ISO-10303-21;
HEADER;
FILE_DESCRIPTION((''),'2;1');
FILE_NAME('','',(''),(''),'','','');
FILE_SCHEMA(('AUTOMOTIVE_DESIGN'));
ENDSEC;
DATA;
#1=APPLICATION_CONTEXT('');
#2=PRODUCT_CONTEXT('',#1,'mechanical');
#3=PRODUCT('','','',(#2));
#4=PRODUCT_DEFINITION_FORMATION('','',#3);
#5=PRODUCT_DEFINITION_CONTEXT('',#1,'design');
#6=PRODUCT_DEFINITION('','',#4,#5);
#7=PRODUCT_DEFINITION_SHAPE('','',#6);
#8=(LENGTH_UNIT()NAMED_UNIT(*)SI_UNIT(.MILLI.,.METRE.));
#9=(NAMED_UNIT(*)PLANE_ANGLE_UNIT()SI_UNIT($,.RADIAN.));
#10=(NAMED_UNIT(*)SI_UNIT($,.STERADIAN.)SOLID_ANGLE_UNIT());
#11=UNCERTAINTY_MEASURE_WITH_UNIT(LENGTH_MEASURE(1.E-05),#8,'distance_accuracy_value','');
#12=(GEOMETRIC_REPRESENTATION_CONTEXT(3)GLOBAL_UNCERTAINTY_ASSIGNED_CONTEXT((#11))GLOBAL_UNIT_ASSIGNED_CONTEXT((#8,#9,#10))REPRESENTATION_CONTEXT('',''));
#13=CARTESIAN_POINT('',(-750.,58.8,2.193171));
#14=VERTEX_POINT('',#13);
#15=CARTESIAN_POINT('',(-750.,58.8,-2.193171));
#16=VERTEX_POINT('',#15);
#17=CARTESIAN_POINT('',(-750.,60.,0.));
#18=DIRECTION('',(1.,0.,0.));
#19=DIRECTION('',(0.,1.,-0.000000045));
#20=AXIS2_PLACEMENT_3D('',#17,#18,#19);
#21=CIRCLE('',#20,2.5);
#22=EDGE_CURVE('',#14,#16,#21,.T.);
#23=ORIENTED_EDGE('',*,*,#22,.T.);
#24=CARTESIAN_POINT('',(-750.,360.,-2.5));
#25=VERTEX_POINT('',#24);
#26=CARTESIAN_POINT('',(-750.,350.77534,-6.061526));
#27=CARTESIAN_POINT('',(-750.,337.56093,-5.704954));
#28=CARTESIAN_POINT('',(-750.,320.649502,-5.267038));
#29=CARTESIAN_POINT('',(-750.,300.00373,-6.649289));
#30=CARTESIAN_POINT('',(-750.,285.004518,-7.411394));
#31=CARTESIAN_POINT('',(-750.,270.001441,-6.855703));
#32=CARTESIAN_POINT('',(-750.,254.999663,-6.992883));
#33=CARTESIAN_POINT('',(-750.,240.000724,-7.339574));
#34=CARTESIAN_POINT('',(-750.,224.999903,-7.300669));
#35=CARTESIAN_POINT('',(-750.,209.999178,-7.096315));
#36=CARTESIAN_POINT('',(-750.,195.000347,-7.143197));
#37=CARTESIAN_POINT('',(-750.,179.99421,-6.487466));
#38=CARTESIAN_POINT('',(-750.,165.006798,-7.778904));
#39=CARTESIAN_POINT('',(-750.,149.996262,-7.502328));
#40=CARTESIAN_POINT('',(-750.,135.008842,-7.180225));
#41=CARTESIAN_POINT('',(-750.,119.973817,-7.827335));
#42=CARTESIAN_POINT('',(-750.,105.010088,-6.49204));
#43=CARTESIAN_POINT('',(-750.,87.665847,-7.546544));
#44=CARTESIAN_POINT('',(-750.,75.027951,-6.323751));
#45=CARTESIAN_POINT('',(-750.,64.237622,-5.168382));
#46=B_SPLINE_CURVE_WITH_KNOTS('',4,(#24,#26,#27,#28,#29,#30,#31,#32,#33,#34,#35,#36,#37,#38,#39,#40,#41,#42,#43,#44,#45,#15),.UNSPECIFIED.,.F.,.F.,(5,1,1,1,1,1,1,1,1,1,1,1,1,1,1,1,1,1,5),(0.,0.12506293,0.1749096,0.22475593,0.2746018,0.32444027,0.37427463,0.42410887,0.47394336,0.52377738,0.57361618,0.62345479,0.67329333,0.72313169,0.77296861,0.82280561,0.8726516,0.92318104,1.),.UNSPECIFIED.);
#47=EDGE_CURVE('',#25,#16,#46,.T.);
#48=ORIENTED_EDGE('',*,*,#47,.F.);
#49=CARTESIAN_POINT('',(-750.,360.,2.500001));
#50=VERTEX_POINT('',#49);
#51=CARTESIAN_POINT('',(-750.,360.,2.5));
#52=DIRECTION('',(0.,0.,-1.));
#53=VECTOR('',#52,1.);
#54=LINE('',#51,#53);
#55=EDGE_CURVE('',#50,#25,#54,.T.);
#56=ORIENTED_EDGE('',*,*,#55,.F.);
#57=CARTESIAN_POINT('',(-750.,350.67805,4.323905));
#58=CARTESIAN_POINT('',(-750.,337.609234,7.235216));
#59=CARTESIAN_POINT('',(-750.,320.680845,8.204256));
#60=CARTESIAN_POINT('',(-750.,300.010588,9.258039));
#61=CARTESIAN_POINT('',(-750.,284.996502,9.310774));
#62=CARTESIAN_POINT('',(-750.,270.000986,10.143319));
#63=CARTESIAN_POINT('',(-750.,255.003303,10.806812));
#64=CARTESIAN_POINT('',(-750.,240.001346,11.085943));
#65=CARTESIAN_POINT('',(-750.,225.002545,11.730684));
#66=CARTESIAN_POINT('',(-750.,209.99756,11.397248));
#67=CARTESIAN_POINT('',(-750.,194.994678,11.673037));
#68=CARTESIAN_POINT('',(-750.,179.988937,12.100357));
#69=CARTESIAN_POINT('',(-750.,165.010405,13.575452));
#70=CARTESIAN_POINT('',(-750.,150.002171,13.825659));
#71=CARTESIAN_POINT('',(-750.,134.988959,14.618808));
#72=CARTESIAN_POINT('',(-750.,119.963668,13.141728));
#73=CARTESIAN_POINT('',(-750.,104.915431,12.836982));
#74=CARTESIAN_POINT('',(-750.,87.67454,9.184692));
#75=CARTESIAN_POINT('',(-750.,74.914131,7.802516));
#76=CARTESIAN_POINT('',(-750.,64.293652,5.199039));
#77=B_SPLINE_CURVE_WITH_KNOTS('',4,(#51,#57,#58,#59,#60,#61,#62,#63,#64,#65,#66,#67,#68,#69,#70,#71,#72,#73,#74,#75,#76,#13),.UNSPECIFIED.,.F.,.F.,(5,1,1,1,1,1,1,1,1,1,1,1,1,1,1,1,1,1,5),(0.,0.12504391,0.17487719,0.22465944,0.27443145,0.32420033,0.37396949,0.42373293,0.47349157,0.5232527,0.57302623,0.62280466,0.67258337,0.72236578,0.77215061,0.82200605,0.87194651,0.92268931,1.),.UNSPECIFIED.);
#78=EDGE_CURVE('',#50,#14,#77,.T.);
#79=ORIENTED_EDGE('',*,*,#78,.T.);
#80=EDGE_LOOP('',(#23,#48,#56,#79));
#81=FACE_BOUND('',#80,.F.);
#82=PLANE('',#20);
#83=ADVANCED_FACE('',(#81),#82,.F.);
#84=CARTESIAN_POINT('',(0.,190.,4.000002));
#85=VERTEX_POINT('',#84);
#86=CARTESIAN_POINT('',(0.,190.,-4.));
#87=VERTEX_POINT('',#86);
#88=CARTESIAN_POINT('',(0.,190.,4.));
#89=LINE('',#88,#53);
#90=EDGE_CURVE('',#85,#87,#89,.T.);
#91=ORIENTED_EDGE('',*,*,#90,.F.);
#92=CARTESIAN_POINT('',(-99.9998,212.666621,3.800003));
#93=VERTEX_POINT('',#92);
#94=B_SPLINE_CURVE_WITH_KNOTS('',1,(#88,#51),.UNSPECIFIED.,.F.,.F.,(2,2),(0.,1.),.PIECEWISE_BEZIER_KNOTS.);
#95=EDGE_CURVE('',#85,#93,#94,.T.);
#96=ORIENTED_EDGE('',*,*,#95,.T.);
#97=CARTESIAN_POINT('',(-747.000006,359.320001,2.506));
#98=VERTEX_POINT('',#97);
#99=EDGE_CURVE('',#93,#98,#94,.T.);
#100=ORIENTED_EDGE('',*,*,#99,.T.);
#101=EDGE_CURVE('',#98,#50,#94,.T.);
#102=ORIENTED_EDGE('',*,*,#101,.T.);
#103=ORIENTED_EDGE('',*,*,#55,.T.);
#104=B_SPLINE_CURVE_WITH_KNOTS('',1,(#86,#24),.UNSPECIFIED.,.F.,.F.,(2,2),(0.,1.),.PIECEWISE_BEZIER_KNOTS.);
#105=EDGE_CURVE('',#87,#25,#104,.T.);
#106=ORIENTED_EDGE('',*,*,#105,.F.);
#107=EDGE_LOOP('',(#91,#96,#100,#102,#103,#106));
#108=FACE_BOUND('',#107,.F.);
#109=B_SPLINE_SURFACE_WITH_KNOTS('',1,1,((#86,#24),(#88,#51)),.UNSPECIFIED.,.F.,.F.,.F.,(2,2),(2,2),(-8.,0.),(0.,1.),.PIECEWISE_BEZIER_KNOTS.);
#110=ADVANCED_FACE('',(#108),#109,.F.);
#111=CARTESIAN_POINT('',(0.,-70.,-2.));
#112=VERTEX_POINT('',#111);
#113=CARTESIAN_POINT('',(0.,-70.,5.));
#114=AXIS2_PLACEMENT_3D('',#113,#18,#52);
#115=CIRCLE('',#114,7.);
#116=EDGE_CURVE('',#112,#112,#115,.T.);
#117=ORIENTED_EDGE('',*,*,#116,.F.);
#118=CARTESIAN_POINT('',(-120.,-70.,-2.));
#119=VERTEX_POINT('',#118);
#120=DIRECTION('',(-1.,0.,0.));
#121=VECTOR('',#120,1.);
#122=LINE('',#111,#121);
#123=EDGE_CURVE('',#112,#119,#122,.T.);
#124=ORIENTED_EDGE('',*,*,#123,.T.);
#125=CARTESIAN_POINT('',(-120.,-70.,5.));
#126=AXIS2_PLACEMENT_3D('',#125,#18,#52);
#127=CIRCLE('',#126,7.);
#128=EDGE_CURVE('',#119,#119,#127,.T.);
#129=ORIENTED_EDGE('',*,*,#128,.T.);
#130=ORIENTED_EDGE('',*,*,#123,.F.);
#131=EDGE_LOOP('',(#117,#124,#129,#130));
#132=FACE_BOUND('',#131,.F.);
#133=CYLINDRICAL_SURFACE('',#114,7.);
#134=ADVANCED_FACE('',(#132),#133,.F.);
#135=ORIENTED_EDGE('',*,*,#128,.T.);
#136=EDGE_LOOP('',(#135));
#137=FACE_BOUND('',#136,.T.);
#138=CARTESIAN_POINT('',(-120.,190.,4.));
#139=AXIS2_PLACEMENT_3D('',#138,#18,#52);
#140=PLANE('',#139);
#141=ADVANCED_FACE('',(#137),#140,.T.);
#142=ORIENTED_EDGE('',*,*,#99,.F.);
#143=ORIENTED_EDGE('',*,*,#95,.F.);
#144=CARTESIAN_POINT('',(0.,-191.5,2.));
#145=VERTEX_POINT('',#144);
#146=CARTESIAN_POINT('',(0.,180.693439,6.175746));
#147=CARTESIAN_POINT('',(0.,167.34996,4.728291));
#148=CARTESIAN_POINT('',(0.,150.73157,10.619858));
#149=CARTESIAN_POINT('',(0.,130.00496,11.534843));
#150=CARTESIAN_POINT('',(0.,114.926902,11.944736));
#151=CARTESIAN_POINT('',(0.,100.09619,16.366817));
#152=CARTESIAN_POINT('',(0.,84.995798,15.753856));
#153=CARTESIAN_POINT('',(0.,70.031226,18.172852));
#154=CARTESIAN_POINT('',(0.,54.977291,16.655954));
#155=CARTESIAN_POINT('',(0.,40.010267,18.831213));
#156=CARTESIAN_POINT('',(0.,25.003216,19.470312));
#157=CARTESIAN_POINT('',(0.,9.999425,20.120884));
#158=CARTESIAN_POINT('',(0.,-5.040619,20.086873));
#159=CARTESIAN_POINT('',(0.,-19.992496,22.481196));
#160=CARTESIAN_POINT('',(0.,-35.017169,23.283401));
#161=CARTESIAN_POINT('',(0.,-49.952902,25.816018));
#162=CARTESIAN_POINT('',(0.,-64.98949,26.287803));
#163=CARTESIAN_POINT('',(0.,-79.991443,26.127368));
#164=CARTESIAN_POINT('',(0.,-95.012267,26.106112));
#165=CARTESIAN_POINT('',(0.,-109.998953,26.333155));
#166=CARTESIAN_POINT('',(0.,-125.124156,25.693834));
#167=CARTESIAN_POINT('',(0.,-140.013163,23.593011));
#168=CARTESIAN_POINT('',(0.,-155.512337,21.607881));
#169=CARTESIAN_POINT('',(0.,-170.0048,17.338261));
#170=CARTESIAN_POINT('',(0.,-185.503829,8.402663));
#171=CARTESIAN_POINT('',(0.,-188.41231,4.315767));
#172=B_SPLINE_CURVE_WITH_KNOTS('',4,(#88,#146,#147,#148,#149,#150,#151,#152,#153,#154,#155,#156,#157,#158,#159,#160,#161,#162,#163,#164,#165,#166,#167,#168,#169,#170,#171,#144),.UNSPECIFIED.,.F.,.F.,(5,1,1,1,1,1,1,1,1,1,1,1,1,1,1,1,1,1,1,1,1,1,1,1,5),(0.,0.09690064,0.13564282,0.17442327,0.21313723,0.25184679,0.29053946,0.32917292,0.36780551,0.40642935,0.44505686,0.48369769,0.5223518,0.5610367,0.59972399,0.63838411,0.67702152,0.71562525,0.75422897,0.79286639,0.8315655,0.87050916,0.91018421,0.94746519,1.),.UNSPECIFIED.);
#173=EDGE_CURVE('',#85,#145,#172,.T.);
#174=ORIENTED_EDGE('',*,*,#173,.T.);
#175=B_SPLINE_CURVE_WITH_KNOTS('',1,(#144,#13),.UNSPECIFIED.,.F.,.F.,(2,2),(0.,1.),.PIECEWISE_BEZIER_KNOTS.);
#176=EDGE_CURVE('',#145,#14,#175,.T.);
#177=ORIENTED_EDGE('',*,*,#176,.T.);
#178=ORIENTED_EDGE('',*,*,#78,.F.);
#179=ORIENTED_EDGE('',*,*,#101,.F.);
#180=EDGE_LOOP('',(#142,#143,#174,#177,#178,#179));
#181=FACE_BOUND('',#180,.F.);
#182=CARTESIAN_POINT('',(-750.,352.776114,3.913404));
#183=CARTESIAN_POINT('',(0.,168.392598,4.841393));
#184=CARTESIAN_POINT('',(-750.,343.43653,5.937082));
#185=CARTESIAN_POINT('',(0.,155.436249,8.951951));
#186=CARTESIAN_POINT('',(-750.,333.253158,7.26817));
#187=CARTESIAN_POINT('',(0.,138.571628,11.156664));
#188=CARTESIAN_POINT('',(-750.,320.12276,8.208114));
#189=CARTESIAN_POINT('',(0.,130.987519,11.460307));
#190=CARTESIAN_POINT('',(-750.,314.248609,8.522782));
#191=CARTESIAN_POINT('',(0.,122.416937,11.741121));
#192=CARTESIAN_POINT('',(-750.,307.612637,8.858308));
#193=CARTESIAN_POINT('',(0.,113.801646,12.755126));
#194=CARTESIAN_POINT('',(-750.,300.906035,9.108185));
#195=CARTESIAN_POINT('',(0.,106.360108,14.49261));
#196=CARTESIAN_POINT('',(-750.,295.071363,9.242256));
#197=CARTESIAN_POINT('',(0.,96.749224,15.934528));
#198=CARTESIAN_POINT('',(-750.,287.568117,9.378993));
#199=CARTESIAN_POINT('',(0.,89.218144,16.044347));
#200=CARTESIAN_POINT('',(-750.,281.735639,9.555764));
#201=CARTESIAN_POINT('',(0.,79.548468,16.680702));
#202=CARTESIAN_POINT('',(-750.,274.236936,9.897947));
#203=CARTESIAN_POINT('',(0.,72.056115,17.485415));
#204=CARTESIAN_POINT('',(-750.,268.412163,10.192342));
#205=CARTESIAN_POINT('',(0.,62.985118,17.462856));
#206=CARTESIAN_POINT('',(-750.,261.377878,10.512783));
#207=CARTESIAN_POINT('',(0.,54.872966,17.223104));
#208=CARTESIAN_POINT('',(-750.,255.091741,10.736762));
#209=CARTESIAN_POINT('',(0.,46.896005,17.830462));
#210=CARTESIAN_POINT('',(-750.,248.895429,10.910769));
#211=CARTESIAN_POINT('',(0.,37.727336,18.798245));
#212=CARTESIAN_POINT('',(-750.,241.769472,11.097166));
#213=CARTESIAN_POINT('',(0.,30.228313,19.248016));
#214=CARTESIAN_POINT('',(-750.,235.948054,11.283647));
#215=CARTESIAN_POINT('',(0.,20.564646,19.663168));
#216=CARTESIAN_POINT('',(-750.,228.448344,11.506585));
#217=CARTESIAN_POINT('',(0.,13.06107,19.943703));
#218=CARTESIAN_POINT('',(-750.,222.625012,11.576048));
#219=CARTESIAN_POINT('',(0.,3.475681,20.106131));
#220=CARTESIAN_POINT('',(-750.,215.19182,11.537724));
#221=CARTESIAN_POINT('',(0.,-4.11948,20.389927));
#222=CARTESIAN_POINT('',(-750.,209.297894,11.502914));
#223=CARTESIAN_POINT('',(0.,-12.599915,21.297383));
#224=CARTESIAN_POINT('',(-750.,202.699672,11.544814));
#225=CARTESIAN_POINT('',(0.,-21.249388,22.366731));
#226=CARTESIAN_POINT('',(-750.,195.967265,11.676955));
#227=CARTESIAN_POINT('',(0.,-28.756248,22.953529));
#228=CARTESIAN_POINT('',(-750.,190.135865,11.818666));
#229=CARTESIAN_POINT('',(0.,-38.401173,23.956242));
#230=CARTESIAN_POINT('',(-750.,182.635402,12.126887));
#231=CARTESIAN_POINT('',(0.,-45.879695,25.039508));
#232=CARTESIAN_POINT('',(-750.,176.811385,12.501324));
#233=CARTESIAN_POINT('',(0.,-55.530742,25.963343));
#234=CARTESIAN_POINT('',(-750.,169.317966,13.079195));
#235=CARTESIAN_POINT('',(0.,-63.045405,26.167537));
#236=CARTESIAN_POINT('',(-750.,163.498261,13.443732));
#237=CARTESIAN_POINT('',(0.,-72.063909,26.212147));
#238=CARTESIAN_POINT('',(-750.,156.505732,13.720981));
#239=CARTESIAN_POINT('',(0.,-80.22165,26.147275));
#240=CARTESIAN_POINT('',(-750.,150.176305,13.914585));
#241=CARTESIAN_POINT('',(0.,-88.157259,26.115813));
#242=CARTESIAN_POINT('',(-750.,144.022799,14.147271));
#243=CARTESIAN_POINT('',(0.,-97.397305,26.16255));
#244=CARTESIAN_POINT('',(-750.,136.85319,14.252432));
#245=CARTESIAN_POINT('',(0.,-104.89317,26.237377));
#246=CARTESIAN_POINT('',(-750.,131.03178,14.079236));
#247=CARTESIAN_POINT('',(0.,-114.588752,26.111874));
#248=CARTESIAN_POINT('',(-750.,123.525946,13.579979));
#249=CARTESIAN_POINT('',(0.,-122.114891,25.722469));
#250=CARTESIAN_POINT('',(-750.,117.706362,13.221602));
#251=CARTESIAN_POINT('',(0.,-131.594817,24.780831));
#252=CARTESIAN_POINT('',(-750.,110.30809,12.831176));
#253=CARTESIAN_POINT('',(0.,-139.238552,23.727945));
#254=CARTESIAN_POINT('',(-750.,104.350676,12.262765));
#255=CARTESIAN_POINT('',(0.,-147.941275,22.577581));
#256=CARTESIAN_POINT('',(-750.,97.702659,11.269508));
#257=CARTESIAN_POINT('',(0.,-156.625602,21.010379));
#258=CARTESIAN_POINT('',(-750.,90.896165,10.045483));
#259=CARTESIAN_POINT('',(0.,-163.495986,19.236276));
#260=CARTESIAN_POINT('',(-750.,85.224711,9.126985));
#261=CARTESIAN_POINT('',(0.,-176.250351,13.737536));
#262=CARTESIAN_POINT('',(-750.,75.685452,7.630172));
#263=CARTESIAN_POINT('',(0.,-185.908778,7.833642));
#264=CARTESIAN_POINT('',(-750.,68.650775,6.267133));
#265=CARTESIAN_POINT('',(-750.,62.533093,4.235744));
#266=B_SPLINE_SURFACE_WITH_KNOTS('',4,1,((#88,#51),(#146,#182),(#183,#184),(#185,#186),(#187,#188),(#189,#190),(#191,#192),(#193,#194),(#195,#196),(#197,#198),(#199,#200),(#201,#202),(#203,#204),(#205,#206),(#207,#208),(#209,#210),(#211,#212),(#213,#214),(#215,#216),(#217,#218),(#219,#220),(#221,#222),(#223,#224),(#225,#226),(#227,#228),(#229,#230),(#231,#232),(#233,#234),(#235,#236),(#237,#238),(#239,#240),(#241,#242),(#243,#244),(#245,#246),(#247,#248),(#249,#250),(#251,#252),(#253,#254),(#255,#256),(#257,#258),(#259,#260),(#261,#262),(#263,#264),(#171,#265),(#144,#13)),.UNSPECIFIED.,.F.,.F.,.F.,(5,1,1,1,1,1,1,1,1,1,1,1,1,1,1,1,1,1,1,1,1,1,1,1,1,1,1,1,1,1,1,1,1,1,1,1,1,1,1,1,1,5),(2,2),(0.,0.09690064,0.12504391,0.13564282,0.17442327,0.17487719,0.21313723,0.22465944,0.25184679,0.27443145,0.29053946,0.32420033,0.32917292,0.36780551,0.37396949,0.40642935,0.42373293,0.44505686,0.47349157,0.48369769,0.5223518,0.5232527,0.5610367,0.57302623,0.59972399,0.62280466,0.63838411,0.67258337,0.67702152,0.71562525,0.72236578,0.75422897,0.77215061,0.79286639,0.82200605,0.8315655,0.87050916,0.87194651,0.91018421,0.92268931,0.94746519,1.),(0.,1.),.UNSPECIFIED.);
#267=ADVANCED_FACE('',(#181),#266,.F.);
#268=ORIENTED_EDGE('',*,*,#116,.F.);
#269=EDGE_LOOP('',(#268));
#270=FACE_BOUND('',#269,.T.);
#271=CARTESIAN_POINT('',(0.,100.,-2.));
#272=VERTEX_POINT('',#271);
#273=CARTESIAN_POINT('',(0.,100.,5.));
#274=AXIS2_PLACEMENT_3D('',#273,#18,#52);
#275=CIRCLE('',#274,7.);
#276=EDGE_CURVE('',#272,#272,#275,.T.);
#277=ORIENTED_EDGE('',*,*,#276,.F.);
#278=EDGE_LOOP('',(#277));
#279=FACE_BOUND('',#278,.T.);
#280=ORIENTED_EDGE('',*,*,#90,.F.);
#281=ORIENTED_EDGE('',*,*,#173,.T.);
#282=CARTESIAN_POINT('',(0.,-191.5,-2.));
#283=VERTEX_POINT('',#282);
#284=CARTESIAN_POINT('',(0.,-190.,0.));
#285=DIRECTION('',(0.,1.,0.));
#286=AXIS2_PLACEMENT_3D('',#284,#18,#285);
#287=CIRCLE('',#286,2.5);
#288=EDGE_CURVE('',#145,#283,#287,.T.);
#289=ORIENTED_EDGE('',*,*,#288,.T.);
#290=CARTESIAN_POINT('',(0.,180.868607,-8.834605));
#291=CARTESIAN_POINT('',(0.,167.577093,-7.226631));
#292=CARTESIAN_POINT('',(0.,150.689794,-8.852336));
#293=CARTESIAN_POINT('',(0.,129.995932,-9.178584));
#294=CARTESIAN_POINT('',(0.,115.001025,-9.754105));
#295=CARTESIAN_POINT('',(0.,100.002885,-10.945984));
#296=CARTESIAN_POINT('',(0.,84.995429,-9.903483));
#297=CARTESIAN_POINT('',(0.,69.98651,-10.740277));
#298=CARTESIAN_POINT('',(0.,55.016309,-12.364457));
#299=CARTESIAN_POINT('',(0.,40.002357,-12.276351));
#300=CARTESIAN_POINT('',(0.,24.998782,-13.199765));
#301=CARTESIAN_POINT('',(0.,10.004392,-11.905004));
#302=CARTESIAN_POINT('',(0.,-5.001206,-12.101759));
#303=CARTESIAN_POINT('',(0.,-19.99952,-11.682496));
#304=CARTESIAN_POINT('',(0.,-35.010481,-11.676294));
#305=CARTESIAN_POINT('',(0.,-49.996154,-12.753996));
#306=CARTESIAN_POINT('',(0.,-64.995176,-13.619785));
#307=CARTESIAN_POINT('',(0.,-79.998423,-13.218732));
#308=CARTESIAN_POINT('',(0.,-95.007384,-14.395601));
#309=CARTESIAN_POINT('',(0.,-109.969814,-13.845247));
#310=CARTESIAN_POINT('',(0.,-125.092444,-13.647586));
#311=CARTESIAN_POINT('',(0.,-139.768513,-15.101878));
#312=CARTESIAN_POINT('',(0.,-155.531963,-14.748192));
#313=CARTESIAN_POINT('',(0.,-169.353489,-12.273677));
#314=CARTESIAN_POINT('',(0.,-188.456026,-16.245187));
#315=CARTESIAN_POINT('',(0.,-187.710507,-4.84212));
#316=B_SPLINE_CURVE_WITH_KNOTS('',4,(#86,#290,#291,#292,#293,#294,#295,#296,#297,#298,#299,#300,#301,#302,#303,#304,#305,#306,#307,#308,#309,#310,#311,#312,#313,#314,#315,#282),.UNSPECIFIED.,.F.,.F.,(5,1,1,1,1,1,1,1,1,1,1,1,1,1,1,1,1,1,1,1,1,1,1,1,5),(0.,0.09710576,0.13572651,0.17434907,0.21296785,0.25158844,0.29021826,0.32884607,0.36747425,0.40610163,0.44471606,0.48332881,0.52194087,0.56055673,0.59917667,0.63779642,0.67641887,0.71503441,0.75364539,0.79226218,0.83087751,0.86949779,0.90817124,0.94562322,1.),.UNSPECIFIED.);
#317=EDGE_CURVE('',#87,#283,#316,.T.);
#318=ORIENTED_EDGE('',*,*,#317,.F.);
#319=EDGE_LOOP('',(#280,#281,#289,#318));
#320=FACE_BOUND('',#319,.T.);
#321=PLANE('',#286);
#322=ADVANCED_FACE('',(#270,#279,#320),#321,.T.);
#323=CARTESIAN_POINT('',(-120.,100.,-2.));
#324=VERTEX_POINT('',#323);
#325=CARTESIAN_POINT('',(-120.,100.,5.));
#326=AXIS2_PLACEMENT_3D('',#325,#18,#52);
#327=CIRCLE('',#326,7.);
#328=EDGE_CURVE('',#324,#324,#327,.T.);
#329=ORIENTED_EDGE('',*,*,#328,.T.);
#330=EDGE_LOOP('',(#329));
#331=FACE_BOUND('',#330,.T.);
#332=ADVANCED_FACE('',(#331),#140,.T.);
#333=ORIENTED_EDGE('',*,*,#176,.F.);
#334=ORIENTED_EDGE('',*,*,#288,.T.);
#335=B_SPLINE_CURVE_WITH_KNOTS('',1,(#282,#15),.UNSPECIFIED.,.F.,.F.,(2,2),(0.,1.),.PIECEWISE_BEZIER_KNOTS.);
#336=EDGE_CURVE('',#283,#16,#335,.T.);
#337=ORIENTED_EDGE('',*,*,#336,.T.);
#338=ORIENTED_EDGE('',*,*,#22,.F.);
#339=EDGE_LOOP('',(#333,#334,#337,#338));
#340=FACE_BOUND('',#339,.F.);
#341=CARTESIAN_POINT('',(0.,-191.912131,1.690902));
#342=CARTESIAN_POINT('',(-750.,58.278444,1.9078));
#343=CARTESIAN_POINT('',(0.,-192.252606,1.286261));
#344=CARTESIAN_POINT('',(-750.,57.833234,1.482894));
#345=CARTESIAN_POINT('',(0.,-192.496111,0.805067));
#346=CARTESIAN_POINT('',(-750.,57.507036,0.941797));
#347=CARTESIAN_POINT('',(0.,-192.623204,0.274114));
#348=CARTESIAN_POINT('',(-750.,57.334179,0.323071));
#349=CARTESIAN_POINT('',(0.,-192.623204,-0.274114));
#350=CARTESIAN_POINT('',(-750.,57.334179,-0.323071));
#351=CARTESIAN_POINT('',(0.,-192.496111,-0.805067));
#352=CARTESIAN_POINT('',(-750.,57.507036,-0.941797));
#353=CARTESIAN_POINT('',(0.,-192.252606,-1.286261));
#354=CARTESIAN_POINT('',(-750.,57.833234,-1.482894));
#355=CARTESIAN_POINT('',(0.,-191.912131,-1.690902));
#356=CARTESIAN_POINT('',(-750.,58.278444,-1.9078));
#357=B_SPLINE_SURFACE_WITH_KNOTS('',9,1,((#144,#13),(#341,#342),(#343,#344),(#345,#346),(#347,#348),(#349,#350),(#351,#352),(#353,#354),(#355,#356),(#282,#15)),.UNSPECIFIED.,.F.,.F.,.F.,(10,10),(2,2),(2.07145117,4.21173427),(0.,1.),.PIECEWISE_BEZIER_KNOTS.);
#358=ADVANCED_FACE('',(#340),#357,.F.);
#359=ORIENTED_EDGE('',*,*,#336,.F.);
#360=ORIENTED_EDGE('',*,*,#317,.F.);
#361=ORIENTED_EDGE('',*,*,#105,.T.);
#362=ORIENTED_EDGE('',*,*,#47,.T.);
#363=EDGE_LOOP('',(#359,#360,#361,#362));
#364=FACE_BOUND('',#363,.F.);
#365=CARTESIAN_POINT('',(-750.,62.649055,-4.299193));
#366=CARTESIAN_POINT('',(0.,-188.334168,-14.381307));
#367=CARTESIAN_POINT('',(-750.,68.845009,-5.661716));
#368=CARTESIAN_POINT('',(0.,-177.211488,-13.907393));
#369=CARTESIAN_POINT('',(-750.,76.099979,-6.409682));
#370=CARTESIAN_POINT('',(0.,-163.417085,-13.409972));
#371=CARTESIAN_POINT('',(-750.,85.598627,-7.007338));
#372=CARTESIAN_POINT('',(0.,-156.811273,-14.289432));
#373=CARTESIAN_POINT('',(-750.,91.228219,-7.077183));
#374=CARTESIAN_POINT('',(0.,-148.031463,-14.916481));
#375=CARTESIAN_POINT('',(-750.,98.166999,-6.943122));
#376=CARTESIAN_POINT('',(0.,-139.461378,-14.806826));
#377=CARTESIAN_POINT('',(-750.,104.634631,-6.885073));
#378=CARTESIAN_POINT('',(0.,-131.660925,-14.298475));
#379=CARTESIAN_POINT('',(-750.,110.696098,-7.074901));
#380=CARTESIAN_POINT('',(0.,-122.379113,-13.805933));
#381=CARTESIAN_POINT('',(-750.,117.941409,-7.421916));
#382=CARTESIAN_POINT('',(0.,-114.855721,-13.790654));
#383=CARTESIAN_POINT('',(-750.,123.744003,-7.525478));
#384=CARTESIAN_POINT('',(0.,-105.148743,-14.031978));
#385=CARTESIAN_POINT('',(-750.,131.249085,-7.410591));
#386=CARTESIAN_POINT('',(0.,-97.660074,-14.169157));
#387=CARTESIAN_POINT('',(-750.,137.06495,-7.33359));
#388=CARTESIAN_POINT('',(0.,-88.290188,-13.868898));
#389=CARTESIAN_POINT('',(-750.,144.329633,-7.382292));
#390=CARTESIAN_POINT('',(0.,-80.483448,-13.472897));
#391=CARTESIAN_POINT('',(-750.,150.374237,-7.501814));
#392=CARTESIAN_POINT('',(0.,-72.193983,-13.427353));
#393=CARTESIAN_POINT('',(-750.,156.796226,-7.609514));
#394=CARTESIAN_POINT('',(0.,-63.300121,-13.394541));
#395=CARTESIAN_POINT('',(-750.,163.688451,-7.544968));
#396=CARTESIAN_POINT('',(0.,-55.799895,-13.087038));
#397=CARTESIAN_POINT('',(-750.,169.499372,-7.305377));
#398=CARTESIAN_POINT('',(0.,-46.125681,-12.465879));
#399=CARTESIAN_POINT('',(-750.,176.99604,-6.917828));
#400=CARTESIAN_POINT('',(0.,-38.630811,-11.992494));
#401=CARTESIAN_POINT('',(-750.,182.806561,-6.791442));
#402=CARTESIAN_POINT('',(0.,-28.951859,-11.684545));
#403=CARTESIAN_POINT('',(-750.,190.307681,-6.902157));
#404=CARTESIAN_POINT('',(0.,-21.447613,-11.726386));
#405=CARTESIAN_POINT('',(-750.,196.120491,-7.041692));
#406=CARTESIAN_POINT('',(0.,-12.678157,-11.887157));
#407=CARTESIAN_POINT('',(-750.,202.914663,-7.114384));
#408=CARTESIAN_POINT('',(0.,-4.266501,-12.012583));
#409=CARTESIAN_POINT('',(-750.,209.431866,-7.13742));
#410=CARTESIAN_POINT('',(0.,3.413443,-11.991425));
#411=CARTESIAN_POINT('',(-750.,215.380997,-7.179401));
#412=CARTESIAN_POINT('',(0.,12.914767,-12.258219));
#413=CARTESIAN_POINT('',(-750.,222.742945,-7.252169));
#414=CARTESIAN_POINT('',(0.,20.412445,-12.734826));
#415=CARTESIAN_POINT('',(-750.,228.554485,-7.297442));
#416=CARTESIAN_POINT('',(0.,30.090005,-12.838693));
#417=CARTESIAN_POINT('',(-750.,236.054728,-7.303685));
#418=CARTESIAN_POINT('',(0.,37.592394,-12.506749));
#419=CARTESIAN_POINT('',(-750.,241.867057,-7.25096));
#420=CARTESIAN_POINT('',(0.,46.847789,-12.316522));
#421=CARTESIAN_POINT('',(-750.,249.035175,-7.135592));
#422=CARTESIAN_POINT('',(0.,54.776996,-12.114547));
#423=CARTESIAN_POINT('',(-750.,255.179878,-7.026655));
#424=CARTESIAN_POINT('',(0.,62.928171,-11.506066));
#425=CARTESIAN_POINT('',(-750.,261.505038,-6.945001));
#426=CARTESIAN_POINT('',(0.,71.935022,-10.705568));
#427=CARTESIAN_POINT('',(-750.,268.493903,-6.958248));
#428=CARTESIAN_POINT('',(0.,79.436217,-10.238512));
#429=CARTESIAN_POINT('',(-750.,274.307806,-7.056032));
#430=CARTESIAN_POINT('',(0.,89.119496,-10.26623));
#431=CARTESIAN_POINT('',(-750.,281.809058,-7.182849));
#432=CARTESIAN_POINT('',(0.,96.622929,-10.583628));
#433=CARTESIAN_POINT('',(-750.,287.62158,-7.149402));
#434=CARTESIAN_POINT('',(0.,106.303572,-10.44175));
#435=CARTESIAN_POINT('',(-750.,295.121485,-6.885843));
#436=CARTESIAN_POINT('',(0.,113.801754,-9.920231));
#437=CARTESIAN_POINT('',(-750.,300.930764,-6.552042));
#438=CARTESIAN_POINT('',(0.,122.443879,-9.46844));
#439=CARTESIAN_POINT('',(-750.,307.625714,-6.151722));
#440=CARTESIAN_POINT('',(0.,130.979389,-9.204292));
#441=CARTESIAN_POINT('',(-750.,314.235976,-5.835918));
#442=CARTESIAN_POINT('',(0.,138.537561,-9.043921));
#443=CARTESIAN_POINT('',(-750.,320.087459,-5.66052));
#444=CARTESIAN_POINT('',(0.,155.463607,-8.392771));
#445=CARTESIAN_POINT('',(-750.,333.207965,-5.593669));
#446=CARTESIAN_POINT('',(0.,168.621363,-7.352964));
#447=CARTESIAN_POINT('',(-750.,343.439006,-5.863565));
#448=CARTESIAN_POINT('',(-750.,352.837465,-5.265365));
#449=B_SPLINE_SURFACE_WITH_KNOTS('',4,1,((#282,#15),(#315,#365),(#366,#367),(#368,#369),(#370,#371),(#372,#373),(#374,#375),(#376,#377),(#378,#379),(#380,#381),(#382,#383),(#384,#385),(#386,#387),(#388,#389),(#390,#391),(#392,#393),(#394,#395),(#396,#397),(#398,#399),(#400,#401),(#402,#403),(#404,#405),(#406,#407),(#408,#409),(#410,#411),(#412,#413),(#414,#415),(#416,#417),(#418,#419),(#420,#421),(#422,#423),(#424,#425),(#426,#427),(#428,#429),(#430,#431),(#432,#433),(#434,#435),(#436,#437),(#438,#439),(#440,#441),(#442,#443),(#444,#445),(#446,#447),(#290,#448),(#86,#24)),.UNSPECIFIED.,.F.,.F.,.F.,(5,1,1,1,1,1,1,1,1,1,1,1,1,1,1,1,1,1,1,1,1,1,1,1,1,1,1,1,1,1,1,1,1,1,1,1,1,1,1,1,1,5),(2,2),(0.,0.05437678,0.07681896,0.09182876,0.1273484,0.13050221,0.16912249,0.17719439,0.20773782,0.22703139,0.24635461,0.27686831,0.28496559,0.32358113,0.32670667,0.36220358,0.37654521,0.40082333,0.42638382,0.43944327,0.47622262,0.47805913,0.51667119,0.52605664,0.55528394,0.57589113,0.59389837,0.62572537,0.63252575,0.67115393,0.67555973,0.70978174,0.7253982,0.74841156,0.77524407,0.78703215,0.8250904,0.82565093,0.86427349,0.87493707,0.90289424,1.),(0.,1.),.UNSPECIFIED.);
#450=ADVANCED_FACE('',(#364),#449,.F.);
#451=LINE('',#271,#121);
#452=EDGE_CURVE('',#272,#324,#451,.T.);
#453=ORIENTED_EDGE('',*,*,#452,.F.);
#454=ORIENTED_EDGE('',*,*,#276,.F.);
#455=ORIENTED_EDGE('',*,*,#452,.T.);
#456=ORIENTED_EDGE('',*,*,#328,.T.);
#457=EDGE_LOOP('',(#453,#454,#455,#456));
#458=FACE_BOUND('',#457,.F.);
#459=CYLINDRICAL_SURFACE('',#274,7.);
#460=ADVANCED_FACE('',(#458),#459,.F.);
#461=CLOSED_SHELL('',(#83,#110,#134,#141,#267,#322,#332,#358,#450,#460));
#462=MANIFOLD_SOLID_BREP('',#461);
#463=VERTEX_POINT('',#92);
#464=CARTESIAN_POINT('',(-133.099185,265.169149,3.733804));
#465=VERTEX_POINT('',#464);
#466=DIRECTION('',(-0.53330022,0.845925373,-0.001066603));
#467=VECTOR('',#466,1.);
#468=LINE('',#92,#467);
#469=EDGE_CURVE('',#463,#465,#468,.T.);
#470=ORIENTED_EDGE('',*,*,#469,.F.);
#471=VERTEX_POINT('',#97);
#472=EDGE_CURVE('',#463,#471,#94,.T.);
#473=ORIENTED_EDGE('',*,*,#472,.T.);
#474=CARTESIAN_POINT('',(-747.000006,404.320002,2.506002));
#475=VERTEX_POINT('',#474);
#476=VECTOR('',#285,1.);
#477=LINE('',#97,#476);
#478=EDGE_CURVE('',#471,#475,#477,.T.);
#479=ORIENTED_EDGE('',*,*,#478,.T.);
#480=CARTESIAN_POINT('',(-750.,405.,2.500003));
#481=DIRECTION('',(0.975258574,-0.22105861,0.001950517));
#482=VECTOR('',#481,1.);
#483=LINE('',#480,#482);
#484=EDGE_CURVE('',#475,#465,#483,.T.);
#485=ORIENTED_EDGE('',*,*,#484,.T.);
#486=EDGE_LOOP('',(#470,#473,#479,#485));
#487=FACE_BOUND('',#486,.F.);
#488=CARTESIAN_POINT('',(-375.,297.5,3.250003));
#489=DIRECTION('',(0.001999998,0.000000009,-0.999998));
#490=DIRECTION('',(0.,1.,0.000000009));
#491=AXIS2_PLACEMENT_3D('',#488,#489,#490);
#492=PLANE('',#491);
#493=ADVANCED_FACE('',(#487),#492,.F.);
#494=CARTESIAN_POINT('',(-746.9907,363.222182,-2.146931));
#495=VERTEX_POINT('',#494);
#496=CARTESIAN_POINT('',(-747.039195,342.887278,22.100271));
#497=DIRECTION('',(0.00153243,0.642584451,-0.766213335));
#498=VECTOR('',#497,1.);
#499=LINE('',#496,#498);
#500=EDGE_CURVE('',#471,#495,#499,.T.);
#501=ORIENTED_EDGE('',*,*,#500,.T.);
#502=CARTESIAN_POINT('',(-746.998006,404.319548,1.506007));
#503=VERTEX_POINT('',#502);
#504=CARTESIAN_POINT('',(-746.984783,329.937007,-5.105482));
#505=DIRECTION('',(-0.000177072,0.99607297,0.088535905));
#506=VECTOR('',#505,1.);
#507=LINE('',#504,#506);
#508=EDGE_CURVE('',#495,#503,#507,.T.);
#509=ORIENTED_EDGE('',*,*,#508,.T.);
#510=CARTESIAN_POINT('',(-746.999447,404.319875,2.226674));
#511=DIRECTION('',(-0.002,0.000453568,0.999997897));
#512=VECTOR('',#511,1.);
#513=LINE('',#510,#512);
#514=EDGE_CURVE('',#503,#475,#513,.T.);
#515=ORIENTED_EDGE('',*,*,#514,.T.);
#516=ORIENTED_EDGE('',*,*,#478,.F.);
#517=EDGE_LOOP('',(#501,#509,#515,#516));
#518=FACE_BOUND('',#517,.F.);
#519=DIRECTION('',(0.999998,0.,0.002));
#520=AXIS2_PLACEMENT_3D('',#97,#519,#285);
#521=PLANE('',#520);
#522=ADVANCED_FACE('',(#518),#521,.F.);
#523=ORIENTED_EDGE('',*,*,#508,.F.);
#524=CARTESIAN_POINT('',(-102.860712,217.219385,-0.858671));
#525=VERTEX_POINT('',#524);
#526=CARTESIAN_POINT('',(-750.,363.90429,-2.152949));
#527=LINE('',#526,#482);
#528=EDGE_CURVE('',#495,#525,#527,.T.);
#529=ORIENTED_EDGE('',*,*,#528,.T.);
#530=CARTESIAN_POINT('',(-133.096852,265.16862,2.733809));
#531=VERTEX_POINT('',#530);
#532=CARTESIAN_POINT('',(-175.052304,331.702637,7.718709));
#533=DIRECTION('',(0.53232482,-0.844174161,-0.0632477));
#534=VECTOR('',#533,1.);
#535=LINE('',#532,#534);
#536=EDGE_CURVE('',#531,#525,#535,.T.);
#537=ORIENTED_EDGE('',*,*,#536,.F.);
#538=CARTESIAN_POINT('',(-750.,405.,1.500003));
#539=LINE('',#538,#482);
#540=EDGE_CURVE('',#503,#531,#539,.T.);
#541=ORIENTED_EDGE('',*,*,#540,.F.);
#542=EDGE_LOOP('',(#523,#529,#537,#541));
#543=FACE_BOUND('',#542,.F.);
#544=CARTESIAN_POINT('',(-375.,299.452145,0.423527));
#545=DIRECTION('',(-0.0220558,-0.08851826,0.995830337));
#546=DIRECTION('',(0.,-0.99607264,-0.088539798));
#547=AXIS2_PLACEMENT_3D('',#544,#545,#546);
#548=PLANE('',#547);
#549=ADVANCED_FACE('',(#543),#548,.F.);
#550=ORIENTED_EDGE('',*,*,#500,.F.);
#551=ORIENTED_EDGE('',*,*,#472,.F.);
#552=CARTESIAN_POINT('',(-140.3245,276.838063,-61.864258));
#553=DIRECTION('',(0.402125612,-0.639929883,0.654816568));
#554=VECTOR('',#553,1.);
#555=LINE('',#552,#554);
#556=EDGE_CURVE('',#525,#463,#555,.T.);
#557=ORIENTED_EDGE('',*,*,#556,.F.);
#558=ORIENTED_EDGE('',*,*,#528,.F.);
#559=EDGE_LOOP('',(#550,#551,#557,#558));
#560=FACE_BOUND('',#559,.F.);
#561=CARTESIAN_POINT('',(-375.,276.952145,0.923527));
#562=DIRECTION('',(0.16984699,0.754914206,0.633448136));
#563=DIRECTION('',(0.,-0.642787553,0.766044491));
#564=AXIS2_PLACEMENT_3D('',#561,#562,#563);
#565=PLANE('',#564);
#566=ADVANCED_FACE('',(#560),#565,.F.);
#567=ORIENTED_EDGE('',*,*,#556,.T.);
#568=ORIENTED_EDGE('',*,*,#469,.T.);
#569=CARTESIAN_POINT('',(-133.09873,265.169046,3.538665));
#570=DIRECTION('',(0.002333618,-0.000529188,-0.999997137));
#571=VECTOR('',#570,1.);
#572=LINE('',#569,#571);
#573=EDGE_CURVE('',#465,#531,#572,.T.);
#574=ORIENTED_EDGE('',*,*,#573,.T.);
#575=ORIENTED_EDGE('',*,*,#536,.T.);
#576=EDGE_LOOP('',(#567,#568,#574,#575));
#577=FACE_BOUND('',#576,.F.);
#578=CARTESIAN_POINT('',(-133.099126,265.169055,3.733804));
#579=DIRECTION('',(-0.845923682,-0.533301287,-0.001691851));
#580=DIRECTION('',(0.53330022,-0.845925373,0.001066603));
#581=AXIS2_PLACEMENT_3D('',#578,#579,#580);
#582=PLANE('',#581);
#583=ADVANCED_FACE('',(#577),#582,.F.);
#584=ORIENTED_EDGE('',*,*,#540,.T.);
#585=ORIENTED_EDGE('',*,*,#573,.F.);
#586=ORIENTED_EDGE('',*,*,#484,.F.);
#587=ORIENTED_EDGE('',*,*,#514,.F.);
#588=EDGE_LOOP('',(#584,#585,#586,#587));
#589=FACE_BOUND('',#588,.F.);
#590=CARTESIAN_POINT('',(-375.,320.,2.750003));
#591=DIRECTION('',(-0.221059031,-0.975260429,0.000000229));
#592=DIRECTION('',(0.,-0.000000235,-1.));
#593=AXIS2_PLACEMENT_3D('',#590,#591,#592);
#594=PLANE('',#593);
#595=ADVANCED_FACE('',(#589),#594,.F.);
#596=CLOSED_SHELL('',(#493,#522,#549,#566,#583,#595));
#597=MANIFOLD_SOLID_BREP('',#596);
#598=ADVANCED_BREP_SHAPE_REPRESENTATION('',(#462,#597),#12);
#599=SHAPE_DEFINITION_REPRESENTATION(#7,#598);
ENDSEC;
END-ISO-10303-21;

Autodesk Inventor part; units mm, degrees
ref_plane "XZ Plane" through (0, 0, 0) normal (0, 1, 0) x (-1, 0, 0)
ref_plane "XY Plane" through (0, 0, 0) normal (0, 0, 1) x (1, 0, 0)
sketch "Skizze1" plane through (0, 0, 0) normal (1, 0, 0) x (0, 1, 0)
  line L0 (190, 0) -> (-190, 0) construction
  line L1 (190, 4) -> (190, -4)
  arc A0 (-187.5, 0) -> (-191.5, -2) centre (-190, 0) ccw
  line L2 (175, 4) -> (175, -4) construction
  line L3 (160, 4) -> (160, -4) construction
  line L4 (145, 4) -> (145, -4) construction
  line L5 (130, 4) -> (130, -4) construction
  line L6 (115, 4) -> (115, -4) construction
  line L7 (100, 4) -> (100, -4) construction
  line L8 (85, 4) -> (85, -4) construction
  line L9 (70, 4) -> (70, -4) construction
  line L10 (55, 4) -> (55, -4) construction
  line L11 (40, 4) -> (40, -4) construction
  line L12 (25, 4) -> (25, -4) construction
  line L13 (10, 4) -> (10, -4) construction
  line L14 (-5, 4) -> (-5, -4) construction
  line L15 (-20, 4) -> (-20, -4) construction
  line L16 (-35, 4) -> (-35, -4) construction
  line L17 (-50, 4) -> (-50, -4) construction
  line L18 (-65, 4) -> (-65, -4) construction
  line L19 (-80, 4) -> (-80, -4) construction
  line L20 (-95, 4) -> (-95, -4) construction
  line L21 (-110, 4) -> (-110, -4) construction
  line L22 (-125, 4) -> (-125, -4) construction
  line L23 (-140, 4) -> (-140, -4) construction
  line L24 (-155, 4) -> (-155, -4) construction
  line L25 (-170, 4) -> (-170, -4) construction
  line L26 (-185, 4) -> (-185, -4) construction
  spline S0 degree 4 poles (190, 4) (180.693439, 6.175746) (167.34996, 4.728291) (150.73157, 10.619858) (130.00496, 11.534843) (114.926902, 11.944736) (100.09619, 16.366817) (84.995798, 15.753856) (70.031226, 18.172852) (54.977291, 16.655954) (40.010267, 18.831213) (25.003216, 19.470312) (9.999425, 20.120884) (-5.040619, 20.086873) (-19.992496, 22.481196) (-35.017169, 23.283401) (-49.952902, 25.816018) (-64.98949, 26.287803) (-79.991443, 26.127368) (-95.012267, 26.106112) (-109.998953, 26.333155) (-125.124156, 25.693834) (-140.013163, 23.593011) (-155.512337, 21.607881) (-170.0048, 17.338261) (-185.503829, 8.402663) (-188.41231, 4.315767) (-191.5, 2) knots 0 0 0 0 0 0.09690064 0.13564282 0.17442327 0.21313723 0.25184679 0.29053946 0.32917292 0.36780551 0.40642935 0.44505686 0.48369769 0.5223518 0.5610367 0.59972399 0.63838411 0.67702152 0.71562525 0.75422897 0.79286639 0.8315655 0.87050916 0.91018421 0.94746519 1 1 1 1 1
  spline S1 degree 4 poles (190, -4) (180.868607, -8.834605) (167.577093, -7.226631) (150.689794, -8.852336) (129.995932, -9.178584) (115.001025, -9.754105) (100.002885, -10.945984) (84.995429, -9.903483) (69.98651, -10.740277) (55.016309, -12.364457) (40.002357, -12.276351) (24.998782, -13.199765) (10.004392, -11.905004) (-5.001206, -12.101759) (-19.99952, -11.682496) (-35.010481, -11.676294) (-49.996154, -12.753996) (-64.995176, -13.619785) (-79.998423, -13.218732) (-95.007384, -14.395601) (-109.969814, -13.845247) (-125.092444, -13.647586) (-139.768513, -15.101878) (-155.531963, -14.748192) (-169.353489, -12.273677) (-188.456026, -16.245187) (-187.710507, -4.84212) (-191.5, -2) knots 0 0 0 0 0 0.09710576 0.13572651 0.17434907 0.21296785 0.25158844 0.29021826 0.32884607 0.36747425 0.40610163 0.44471606 0.48332881 0.52194087 0.56055673 0.59917667 0.63779642 0.67641887 0.71503441 0.75364539 0.79226218 0.83087751 0.86949779 0.90817124 0.94562322 1 1 1 1 1
  point P0 (0, 0)
  point P1 (0, 0)
  point P2 (175, 5.762055)
  point P3 (160, 7.568582)
  point P4 (145, 10.260397)
  point P5 (130, 11.485616)
  point P6 (115, 12.742364)
  point P7 (100, 15.367746)
  point P8 (85, 16.347768)
  point P9 (70, 17.391401)
  point P10 (55, 17.391401)
  point P11 (40, 18.529054)
  point P12 (25, 19.467026)
  point P13 (10, 19.988015)
  point P14 (-5, 20.572417)
  point P15 (-20, 22.167853)
  point P16 (-35, 23.6255)
  point P17 (-50, 25.402848)
  point P18 (-65, 26.154606)
  point P19 (-80, 26.154606)
  point P20 (-95, 26.154606)
  point P21 (-110, 26.154606)
  point P22 (-125, 25.402848)
  point P23 (-140, 23.6255)
  point P24 (-155, 21.215098)
  point P25 (-170, 16.347768)
  point P26 (-185, 7.568582)
  point P27 (175, -7.682008)
  point P28 (160, -8.150675)
  point P29 (145, -8.783576)
  point P30 (130, -9.246912)
  point P31 (115, -9.874385)
  point P32 (100, -10.498641)
  point P33 (85, -10.281472)
  point P34 (70, -10.900212)
  point P35 (55, -12.02171)
  point P36 (40, -12.471703)
  point P37 (25, -12.755718)
  point P38 (10, -12.200497)
  point P39 (-5, -11.98159)
  point P40 (-20, -11.767642)
  point P41 (-35, -11.8968)
  point P42 (-50, -12.710546)
  point P43 (-65, -13.366077)
  point P44 (-80, -13.53146)
  point P45 (-95, -14.049831)
  point P46 (-110, -13.916712)
  point P47 (-125, -13.979079)
  point P48 (-140, -14.733207)
  point P49 (-155, -14.367191)
  point P50 (-170, -13.675353)
  point P51 (-185, -11.438548)
  dimension "d0" = 380
  dimension "d1" = 8
  dimension "d2" = 5
  dimension "d3" = 15
  dimension "d6" = 15
  dimension "d11" = 1.5
ref_plane "Arbeitsebene1" through (-750, 0, 0) normal (1, 0, 0) x (0, 1, 0)
sketch "Skizze2" plane through (-750, 0, 0) normal (1, 0, 0) x (0, 1, 0)
  line L0 (190, 0) -> (-190, 0) construction
  line L1 (60, 0) -> (360, 0) construction
  arc A0 (62.5, 0) -> (58.8, -2.193171) centre (60, 0) ccw
  line L2 (360, 2.5) -> (360, -2.5)
  line L3 (345, 4.297808) -> (345, -3.702192) construction
  line L4 (330, 4.297808) -> (330, -3.702192) construction
  line L5 (315, 4.297808) -> (315, -3.702192) construction
  line L6 (300, 4.297808) -> (300, -3.702192) construction
  line L7 (285, 4.297808) -> (285, -3.702192) construction
  line L8 (270, 4.297808) -> (270, -3.702192) construction
  line L9 (255, 4.297808) -> (255, -3.702192) construction
  line L10 (240, 4.297808) -> (240, -3.702192) construction
  line L11 (225, 4.297808) -> (225, -3.702192) construction
  line L12 (210, 4.297808) -> (210, -3.702192) construction
  line L13 (195, 4.297808) -> (195, -3.702192) construction
  line L14 (180, 4.297808) -> (180, -3.702192) construction
  line L15 (165, 4.297808) -> (165, -3.702192) construction
  line L16 (150, 4.297808) -> (150, -3.702192) construction
  line L17 (135, 4.297808) -> (135, -3.702192) construction
  line L18 (120, 4.297808) -> (120, -3.702192) construction
  line L19 (105, 4.297808) -> (105, -3.702192) construction
  line L20 (90, 4.297808) -> (90, -3.702192) construction
  line L21 (75, 4.297808) -> (75, -3.702192) construction
  spline S0 degree 4 poles (360, 2.5) (350.67805, 4.323905) (337.609234, 7.235216) (320.680845, 8.204256) (300.010588, 9.258039) (284.996502, 9.310774) (270.000986, 10.143319) (255.003303, 10.806812) (240.001346, 11.085943) (225.002545, 11.730684) (209.99756, 11.397248) (194.994678, 11.673037) (179.988937, 12.100357) (165.010405, 13.575452) (150.002171, 13.825659) (134.988959, 14.618808) (119.963668, 13.141728) (104.915431, 12.836982) (87.67454, 9.184692) (74.914131, 7.802516) (64.293652, 5.199039) (58.8, 2.193171) knots 0 0 0 0 0 0.12504391 0.17487719 0.22465944 0.27443145 0.32420033 0.37396949 0.42373293 0.47349157 0.5232527 0.57302623 0.62280466 0.67258337 0.72236578 0.77215061 0.82200605 0.87194651 0.92268931 1 1 1 1 1
  spline S1 degree 4 poles (360, -2.5) (350.77534, -6.061526) (337.56093, -5.704954) (320.649502, -5.267038) (300.00373, -6.649289) (285.004518, -7.411394) (270.001441, -6.855703) (254.999663, -6.992883) (240.000724, -7.339574) (224.999903, -7.300669) (209.999178, -7.096315) (195.000347, -7.143197) (179.99421, -6.487466) (165.006798, -7.778904) (149.996262, -7.502328) (135.008842, -7.180225) (119.973817, -7.827335) (105.010088, -6.49204) (87.665847, -7.546544) (75.027951, -6.323751) (64.237622, -5.168382) (58.8, -2.193171) knots 0 0 0 0 0 0.12506293 0.1749096 0.22475593 0.2746018 0.32444027 0.37427463 0.42410887 0.47394336 0.52377738 0.57361618 0.62345479 0.67329333 0.72313169 0.77296861 0.82280561 0.8726516 0.92318104 1 1 1 1 1
  point P0 (0, 0)
  point P1 (345, 5.381586)
  point P2 (330, 7.414984)
  point P3 (315, 8.476148)
  point P4 (300, 9.115486)
  point P5 (285, 9.466863)
  point P6 (270, 10.110039)
  point P7 (255, 10.729328)
  point P8 (240, 11.156718)
  point P9 (225, 11.534555)
  point P10 (210, 11.518841)
  point P11 (195, 11.707994)
  point P12 (180, 12.310051)
  point P13 (165, 13.33104)
  point P14 (150, 13.926865)
  point P15 (135, 14.162575)
  point P16 (120, 13.368433)
  point P17 (105, 12.264687)
  point P18 (90, 9.916387)
  point P19 (75, 7.41217)
  point P20 (345, -5.429767)
  point P21 (330, -5.647567)
  point P22 (315, -5.834087)
  point P23 (300, -6.599319)
  point P24 (285, -7.144916)
  point P25 (270, -6.993534)
  point P26 (255, -7.036243)
  point P27 (240, -7.261369)
  point P28 (225, -7.266713)
  point P29 (210, -7.145089)
  point P30 (195, -7.006223)
  point P31 (180, -6.877035)
  point P32 (165, -7.465421)
  point P33 (150, -7.491508)
  point P34 (135, -7.371819)
  point P35 (120, -7.434014)
  point P36 (105, -6.942805)
  point P37 (90, -7.027191)
  point P38 (75, -6.212014)
  point P39 (210, 0.297808)
  dimension "d13" = 250
  dimension "d14" = 300
  dimension "d15" = 5
  dimension "d16" = 5
  dimension "d17" = 8
  dimension "d18" = 15
  dimension "d21" = 15
  dimension "d26" = 1.2
loft "Erhebung1" add profiles "Skizze1", "Skizze2"
sketch "Skizze4" plane through (0, 190, 4) normal (1, 0, 0) x (0, 0, -1)
  circle A0 centre (-1, -260) radius 7
  circle A1 centre (-1, -90) radius 7
  line L0 (-1, -260) -> (-1, -90) construction
  arc A2 (2, -381.5) -> (6, -381.5) centre (4, -380) ccw projected
  point P0 (-1, -190)
  dimension "d36" = 14
  dimension "d40" = 170
  dimension "d59" = 5
  dimension "d60" = 120
extrude "Extrusion1" cut sketch "Skizze4" against normal blind 120
sketch "Skizze5" plane through (-750, 209.456692, 6.94731) normal (-1, 0, 0) x (0, 0.1920162, 0.9813918)
  line L0 (24.542202, 148.595917) -> (19.635243, 149.555998)
  line L1 (24.542202, 148.595917) -> (33.182931, 192.758546)
  line L2 (33.182931, 192.758546) -> (32.201539, 192.950562)
  line L3 (32.201539, 192.950562) -> (20.72552, 153.320997)
  line L4 (20.72552, 153.320997) -> (24.542202, 148.595917)
  point P0 (-47.037112, -204.225074)
  dimension "d41" = 1
  dimension "d42" = 45
  dimension "d43" = 50
  dimension "d44" = 90
sketch3d "3D-Skizze1"
  line L0 (-750, 360, 2.5) -> (0, 190, 4)
sweep "Sweeping1" add profiles "Skizze5" path "3D-Skizze1"
sketch "Skizze6" plane through (-750, 360, 2.5) normal (-0.002, 0, 0.999998) x (0.999998, 0, 0.002)
  line L0 (0, 0) -> (0, 45)
  line L1 (750.0015, -170) -> (0, 0) construction
  line L2 (750.0015, -125) -> (750.0015, -170)
  line L3 (0, 45) -> (750.0015, -125) construction
  line L4 (750.0015, -125) -> (750.0015, -170)
  line L5 (615.393645, -92.438213) -> (752.0015, -123.402598)
  line L6 (752.0015, -123.402598) -> (752.0015, -170.453332)
  line L7 (615.393645, -92.438213) -> (650.0015, -147.333379)
  line L8 (750.0015, -170) -> (0, 0)
  line L9 (752.0015, -170.453332) -> (650.0015, -147.333379)
  line L10 (0, 0) -> (3, -0.679999)
  line L11 (3, -0.679999) -> (3, 50.453332)
  line L12 (3, 50.453332) -> (-2, 50.453332)
  line L13 (-2, 50.453332) -> (-2, 0.453332)
  line L14 (-2, 0.453332) -> (0, 0)
  line L15 (-0.002, 45) -> (749.9995, -125)
  point P0 (749.9935, -360)
  point P1 (749.9855, -170)
  dimension "d47" = 100
  dimension "d53" = 2
  dimension "d54" = 45
  dimension "d55" = 2
  dimension "d56" = 3
  dimension "d57" = 5
  dimension "d58" = 50
extrude "Extrusion2" cut sketch "Skizze6" against normal through all contours L14 L13 L12 L11 L15 L0 | L0 L15 L11 L8 | L7 L15 L2 L8 | L7 L5 L6 L9 L2 L15
equation "\"G_L\" = 0"
equation "\"G_H\" = 0"
equation "\"G_B\" = 0"
properties part number "wing_r" material "GEDA Polyamid"
